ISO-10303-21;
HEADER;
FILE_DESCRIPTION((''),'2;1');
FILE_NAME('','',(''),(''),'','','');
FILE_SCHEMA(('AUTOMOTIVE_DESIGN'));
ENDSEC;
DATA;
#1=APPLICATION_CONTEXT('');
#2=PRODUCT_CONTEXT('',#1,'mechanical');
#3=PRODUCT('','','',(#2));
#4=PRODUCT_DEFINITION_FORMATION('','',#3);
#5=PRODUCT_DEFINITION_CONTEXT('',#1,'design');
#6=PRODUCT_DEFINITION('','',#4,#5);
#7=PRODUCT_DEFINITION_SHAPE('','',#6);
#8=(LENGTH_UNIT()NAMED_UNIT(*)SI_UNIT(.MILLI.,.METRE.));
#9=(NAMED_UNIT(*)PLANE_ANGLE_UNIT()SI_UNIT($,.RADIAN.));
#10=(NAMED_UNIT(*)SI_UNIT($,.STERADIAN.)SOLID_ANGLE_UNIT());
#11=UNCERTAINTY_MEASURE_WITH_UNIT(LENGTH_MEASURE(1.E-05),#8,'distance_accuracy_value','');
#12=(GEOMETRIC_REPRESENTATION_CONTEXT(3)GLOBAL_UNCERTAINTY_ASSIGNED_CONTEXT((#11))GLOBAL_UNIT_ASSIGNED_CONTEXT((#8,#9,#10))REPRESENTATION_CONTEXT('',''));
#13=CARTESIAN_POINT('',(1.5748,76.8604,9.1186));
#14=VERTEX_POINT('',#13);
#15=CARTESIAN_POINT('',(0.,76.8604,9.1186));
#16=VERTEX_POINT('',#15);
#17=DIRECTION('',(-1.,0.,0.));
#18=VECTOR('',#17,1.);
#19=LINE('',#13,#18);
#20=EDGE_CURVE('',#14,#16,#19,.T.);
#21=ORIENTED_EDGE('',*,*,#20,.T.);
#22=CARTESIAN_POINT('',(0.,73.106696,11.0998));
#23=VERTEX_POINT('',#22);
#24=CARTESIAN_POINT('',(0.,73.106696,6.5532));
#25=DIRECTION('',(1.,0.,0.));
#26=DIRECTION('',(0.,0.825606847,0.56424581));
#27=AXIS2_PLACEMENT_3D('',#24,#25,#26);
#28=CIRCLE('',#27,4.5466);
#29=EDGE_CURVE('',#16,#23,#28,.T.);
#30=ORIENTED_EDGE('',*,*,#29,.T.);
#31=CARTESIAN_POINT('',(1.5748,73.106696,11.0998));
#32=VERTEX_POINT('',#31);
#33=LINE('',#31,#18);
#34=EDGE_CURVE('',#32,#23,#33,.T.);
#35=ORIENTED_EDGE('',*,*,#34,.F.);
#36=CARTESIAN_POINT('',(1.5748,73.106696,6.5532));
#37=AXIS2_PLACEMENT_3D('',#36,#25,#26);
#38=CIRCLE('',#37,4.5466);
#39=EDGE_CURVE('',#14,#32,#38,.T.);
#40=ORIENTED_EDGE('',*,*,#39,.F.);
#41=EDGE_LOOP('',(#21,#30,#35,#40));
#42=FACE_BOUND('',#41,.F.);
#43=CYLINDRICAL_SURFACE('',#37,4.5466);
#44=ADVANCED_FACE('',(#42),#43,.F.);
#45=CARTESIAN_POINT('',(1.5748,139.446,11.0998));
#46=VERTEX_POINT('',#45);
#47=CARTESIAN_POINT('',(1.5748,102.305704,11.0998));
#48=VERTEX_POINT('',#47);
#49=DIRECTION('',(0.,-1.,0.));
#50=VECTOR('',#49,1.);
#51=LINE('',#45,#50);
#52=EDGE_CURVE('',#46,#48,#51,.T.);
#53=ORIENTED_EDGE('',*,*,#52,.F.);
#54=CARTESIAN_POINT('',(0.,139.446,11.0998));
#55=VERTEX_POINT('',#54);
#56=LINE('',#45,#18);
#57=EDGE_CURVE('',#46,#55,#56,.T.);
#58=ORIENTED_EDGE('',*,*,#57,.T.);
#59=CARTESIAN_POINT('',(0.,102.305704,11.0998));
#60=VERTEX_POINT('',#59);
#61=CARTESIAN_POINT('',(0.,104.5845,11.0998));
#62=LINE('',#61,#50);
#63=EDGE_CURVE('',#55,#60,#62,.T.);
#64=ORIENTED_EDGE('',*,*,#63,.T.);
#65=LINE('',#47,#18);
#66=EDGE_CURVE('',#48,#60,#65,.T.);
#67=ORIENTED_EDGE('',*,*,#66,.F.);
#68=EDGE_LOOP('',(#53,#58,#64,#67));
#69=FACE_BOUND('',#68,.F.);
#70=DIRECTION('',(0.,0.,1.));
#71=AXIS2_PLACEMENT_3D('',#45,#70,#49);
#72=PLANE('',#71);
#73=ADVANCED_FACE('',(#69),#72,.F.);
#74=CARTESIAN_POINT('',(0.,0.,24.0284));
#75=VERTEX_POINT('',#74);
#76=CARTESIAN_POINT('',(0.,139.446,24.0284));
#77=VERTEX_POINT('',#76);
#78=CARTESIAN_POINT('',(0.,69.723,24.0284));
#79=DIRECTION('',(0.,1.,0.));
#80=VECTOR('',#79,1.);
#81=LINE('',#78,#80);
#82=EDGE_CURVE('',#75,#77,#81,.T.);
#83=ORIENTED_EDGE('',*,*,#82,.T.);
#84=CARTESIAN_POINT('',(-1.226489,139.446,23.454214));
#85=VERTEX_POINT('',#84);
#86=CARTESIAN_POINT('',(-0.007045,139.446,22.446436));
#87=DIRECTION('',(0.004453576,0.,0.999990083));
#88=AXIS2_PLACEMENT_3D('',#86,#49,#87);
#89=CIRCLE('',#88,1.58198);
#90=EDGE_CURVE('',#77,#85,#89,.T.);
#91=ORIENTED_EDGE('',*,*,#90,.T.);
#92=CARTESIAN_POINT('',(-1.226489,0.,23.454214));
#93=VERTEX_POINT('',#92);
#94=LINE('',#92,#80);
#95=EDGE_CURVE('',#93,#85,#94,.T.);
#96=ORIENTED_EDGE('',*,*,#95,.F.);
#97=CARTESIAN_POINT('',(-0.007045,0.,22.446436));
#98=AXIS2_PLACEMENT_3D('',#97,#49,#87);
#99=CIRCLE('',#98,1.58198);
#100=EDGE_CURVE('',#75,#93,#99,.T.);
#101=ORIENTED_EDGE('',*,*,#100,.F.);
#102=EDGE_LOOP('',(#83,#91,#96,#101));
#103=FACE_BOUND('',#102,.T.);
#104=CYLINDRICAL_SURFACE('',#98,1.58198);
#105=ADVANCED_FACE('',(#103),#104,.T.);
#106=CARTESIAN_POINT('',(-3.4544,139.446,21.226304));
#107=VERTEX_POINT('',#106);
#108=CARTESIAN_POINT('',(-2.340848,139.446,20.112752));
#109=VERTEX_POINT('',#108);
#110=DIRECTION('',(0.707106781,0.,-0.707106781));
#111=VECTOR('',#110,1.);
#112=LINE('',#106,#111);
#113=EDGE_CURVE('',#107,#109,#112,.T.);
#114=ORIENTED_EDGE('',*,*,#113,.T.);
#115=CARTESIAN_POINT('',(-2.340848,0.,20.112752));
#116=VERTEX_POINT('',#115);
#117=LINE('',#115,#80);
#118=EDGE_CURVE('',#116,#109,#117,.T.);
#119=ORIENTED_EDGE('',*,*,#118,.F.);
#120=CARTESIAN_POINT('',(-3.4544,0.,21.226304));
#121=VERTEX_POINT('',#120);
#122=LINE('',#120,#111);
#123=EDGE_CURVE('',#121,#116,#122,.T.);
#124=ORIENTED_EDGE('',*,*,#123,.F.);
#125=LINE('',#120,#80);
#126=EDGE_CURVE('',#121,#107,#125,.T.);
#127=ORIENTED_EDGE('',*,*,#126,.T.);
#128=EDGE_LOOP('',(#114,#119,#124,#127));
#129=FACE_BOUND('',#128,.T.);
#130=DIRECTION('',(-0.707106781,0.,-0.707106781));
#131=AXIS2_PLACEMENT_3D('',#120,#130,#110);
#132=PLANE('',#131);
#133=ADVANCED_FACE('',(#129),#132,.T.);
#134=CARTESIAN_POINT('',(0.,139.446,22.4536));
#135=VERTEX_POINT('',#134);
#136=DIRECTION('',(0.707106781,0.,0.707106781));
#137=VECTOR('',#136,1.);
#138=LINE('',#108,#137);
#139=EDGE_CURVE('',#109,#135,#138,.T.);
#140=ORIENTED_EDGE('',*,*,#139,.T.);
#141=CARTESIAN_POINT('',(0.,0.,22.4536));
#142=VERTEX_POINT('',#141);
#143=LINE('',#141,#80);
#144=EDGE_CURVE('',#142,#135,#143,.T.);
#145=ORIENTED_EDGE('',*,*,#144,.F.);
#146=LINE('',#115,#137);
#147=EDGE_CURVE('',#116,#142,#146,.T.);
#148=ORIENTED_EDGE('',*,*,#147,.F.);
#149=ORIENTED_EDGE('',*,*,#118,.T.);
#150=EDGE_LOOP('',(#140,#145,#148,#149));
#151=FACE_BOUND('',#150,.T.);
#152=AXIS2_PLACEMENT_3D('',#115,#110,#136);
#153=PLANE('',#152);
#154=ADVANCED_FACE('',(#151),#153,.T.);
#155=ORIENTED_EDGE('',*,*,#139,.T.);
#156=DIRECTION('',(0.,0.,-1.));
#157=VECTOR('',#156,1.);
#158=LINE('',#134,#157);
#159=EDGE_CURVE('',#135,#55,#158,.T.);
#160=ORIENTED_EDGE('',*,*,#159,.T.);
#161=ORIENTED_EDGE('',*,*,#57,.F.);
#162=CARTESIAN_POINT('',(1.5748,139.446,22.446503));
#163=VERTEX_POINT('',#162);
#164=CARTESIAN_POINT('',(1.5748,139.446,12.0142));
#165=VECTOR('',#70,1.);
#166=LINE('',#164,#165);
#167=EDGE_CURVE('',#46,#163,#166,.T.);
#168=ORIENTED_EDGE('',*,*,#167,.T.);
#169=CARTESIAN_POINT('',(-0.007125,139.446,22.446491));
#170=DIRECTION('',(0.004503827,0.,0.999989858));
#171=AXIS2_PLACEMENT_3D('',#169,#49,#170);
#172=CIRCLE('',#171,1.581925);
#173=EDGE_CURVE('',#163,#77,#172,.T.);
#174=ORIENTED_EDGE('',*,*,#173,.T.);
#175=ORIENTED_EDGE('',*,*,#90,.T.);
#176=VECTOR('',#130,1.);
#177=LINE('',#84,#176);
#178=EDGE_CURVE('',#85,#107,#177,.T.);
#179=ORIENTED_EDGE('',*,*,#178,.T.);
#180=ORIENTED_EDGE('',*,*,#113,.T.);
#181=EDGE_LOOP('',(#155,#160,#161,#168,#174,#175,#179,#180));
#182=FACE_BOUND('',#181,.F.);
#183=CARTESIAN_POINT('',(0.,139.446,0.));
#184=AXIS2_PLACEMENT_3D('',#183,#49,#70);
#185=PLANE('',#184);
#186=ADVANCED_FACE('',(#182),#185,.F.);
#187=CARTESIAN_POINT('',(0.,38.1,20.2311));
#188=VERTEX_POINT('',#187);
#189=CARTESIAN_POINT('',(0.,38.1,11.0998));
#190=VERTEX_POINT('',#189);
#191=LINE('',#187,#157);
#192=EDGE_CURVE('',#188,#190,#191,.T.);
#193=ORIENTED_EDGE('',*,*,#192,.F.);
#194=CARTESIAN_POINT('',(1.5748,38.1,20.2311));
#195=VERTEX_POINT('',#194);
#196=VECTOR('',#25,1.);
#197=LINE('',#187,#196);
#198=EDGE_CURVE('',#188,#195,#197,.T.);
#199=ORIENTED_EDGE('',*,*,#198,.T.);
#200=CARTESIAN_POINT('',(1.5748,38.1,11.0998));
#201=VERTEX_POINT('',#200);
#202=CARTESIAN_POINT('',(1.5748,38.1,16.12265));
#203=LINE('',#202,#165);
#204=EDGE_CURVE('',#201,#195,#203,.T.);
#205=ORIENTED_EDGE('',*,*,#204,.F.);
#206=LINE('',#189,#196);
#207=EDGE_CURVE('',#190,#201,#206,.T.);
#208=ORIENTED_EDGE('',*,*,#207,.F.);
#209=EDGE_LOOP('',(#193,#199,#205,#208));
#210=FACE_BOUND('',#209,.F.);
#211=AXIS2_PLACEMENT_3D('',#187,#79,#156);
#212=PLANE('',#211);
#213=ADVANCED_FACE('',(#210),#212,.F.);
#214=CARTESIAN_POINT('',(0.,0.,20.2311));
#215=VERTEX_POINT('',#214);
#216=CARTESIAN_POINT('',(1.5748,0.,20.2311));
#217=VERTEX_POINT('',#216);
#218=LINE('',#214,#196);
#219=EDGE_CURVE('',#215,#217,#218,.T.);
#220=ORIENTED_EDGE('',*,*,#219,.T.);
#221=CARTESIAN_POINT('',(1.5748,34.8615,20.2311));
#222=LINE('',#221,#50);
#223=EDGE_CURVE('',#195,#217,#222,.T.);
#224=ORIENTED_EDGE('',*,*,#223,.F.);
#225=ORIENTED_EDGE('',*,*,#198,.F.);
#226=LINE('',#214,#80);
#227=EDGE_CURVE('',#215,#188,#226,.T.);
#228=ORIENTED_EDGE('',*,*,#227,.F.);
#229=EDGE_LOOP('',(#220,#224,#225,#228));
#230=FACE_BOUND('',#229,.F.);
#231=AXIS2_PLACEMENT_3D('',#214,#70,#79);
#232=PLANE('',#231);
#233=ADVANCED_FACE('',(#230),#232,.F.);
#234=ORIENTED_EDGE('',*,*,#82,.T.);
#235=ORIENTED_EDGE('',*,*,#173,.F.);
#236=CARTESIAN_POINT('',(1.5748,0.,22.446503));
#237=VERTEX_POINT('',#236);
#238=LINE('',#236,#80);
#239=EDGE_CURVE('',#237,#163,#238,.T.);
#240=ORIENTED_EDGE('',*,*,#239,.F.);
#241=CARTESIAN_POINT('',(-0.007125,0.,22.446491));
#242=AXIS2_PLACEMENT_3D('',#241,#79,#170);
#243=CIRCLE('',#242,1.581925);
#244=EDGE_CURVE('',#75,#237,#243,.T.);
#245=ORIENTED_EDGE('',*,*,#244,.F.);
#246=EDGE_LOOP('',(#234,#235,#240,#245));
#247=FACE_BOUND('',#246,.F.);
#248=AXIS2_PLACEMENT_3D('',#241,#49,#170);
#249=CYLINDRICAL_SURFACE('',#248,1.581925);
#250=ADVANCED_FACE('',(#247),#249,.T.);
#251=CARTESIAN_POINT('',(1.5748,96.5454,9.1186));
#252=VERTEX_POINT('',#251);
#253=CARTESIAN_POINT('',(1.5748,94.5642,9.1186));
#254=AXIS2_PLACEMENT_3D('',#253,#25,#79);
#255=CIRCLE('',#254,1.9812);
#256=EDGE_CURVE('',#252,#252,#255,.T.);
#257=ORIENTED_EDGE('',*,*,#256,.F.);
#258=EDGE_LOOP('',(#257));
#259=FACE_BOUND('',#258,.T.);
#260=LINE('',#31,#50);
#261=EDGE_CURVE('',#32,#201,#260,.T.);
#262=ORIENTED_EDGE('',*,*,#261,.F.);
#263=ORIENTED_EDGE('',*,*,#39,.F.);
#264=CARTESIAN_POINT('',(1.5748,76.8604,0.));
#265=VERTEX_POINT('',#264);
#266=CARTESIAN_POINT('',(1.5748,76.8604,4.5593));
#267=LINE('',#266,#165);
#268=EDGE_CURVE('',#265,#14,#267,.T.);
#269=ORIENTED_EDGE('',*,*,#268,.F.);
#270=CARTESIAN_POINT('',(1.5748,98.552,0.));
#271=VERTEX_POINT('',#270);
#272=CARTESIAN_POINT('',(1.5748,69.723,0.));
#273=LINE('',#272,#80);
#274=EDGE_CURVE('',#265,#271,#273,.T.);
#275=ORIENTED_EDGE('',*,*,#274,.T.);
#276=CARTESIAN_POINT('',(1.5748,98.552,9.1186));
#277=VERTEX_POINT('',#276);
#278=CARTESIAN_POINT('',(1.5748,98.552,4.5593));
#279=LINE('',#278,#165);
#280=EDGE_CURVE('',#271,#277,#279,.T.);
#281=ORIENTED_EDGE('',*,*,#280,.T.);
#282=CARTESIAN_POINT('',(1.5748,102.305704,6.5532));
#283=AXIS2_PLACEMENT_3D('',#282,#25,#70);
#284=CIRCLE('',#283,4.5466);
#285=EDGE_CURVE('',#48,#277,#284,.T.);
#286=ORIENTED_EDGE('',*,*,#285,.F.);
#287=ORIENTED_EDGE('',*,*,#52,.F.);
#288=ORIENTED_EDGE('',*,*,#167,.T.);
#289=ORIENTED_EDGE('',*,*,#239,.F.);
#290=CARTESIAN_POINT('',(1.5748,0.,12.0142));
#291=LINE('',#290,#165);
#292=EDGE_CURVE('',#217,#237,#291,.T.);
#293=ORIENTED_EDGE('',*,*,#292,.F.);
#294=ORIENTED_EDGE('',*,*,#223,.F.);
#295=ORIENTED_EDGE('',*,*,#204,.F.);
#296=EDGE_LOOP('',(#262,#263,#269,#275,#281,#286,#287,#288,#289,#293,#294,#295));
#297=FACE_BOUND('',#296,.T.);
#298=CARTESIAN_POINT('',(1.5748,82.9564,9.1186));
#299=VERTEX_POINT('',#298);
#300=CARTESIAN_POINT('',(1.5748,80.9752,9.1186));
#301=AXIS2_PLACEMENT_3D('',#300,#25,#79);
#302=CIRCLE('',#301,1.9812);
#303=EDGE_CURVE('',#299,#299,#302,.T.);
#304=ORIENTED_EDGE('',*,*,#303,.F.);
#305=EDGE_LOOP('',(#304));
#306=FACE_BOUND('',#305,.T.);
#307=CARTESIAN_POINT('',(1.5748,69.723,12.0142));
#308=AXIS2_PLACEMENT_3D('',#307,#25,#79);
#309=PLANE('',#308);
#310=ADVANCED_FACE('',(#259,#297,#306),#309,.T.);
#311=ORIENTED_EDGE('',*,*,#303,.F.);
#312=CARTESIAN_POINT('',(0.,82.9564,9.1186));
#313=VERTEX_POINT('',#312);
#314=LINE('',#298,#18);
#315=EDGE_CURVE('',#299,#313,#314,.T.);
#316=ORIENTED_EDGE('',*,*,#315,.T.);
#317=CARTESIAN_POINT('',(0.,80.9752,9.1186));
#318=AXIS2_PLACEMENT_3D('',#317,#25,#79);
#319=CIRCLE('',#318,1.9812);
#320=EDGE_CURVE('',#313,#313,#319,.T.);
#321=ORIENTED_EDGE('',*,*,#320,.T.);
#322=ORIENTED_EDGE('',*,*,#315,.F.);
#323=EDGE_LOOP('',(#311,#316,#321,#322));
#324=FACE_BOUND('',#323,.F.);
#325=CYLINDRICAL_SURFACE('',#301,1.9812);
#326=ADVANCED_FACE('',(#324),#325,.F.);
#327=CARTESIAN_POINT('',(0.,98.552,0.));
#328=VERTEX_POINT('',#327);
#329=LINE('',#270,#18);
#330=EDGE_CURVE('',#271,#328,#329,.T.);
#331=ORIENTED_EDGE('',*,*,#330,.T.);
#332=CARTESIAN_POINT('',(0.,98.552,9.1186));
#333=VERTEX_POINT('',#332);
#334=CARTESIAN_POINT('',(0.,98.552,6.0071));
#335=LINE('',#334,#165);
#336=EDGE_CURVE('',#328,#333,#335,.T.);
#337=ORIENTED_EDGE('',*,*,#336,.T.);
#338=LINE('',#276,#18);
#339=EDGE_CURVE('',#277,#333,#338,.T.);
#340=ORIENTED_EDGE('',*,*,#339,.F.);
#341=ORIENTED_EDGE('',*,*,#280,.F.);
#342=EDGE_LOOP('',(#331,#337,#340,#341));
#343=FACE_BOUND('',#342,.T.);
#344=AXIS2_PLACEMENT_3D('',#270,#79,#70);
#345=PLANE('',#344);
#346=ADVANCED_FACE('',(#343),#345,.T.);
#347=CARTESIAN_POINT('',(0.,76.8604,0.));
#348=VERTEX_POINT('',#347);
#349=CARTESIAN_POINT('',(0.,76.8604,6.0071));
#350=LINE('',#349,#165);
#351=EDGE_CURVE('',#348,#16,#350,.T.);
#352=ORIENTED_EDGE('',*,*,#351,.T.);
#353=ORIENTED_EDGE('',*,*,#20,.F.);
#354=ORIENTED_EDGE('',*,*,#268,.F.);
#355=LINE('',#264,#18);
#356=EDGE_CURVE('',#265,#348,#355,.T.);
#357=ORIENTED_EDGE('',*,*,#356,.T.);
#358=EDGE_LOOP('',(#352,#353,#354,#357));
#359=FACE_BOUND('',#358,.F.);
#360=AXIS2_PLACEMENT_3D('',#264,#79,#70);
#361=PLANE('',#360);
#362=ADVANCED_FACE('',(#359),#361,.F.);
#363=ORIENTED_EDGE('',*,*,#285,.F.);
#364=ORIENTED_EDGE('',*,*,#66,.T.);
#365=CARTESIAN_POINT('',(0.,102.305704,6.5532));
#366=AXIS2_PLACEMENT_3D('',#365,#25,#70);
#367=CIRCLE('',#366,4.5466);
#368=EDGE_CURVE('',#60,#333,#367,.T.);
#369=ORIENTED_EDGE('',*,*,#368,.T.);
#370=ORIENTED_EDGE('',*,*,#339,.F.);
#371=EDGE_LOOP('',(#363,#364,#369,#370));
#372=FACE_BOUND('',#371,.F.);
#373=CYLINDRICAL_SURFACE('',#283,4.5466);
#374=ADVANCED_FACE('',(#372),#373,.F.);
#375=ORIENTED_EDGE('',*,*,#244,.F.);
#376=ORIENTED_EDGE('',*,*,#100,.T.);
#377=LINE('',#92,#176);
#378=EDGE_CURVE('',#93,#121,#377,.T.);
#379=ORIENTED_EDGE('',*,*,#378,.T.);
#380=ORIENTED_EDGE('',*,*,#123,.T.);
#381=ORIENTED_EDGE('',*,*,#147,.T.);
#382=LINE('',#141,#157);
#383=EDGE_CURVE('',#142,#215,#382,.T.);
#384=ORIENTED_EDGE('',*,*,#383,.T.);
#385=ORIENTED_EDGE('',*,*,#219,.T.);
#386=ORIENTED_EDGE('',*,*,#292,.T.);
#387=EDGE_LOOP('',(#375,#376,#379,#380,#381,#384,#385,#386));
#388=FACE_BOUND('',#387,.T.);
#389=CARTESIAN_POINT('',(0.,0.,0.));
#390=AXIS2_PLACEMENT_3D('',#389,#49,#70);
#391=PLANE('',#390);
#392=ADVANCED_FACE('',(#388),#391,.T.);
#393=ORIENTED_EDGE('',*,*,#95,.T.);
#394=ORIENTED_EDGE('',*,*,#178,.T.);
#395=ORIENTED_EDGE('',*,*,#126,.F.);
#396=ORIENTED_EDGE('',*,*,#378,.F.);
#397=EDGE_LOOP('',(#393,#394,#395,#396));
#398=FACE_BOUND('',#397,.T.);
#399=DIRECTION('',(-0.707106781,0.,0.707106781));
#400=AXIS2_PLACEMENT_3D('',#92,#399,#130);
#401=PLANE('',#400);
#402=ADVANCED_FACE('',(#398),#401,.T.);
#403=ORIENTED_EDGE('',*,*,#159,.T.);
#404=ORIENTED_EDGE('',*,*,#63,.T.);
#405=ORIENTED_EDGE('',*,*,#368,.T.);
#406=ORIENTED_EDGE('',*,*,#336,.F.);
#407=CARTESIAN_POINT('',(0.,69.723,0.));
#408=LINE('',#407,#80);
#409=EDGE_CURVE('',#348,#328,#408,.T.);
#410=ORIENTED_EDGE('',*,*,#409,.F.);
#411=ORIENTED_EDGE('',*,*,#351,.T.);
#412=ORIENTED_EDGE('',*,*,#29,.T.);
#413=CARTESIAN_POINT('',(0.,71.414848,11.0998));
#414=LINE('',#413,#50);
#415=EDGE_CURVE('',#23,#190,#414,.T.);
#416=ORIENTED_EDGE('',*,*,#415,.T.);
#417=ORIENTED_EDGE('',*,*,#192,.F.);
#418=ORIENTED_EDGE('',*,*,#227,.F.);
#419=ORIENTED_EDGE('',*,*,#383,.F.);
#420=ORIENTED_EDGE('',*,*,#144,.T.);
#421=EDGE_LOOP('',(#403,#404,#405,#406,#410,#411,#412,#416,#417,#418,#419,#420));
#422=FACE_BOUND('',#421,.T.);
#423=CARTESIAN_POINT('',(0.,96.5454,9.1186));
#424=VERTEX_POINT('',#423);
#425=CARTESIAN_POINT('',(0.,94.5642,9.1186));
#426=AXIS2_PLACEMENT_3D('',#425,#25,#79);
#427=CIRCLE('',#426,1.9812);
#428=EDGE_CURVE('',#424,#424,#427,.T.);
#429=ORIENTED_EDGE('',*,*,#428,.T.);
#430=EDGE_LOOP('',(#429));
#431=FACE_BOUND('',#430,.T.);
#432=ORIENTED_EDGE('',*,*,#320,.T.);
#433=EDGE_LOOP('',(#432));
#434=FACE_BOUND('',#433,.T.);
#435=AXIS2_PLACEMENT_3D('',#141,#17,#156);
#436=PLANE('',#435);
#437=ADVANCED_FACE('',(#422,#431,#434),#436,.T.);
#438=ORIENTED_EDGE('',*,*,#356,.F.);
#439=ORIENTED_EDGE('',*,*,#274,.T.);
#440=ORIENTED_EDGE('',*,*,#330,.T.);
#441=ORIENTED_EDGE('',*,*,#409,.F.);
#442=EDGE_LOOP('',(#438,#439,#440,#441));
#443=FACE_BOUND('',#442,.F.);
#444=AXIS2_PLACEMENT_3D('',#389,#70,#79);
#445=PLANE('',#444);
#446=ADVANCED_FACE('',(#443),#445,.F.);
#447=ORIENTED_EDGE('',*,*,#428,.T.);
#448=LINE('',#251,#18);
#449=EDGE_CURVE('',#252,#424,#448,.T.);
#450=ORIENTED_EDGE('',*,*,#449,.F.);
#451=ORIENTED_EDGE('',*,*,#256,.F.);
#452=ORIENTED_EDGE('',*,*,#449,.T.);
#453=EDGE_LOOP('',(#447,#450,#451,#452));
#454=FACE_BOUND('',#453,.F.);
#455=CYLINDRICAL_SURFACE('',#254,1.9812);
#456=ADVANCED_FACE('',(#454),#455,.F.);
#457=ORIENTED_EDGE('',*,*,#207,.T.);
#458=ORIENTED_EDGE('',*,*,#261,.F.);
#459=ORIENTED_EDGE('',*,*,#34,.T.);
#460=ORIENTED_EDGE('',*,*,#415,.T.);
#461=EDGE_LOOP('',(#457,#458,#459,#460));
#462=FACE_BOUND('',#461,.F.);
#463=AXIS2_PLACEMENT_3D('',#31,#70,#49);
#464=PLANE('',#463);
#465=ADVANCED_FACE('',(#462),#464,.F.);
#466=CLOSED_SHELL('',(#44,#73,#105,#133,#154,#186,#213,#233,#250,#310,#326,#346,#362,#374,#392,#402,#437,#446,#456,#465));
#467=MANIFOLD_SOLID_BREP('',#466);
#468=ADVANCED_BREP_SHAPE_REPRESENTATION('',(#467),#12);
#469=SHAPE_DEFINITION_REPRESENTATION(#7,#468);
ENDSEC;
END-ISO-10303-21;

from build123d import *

# Parameters (mm, degrees)
F0_W      = 139.446
F0_H      = 24.0284
F1_DEPTH  = 1.5748
F2_R      = 2.5273
F2_R_2    = 1.9812
F3_DEPTH  = 25.4
F4_W      = 76.8604
F4_H      = 9.1186
F4_W_2    = 40.894
F5_DEPTH  = 25.4
F7_DEPTH  = 25.4
F9_DEPTH  = 139.447
F10_DEPTH = 139.446
F11_R     = 2.5273
F12_DEPTH = 25.4
F14_DEPTH = 1.5748
F15_DEPTH = 25.4


# Not quite as in the source:
# - ends of sketch curves that miss each other by under 0.0002 mm in the source are joined


with BuildPart() as f1:
    # F0 (on Right) → F1 (new body)
    with BuildSketch(Plane.YZ):
        with Locations((69.723, 12.0142)):
            Rectangle(F0_W, F0_H)
    extrude(amount=F1_DEPTH)

    # F2 (on face) → F3 (cut)
    with BuildSketch(Plane.YZ.offset(1.5748)):
        with Locations((7.9502, 14.6812)):
            Circle(F2_R)
        with Locations((80.9752, 9.1186)):
            Circle(F2_R_2)
        with Locations((94.5642, 9.1186)):
            Circle(F2_R_2)
    extrude(amount=-F3_DEPTH, mode=Mode.SUBTRACT)

    # F4 (on face) → F5 (cut)
    with BuildSketch(Plane.YZ.offset(1.5748)):
        with Locations((38.4302, 4.5593)):
            Rectangle(F4_W, F4_H)
        with Locations((118.999, 4.5593)):
            Rectangle(F4_W_2, F4_H)
    extrude(amount=-F5_DEPTH, mode=Mode.SUBTRACT)

    # F6 (on face) → F7 (cut)
    with BuildSketch(Plane.YZ.offset(1.5748)):
        with BuildLine():
            ThreePointArc((102.3057040906, 11.0998), (104.4279345117, 10.5741090514), (106.0594081813, 9.1186))
            Line((106.0594081813, 9.1186), (139.446, 9.1186))
            Line((139.446, 9.1186), (139.446, 11.0998))
            Line((139.446, 11.0998), (102.3057040906, 11.0998))
        make_face()
        with BuildLine():
            Line((98.552, 9.1186), (106.0594081813, 9.1186))
            ThreePointArc((106.0594081813, 9.1186), (104.4279345117, 10.5741090514), (102.3057040906, 11.0998))
            ThreePointArc((102.3057040906, 11.0998), (100.1834736696, 10.5741090514), (98.552, 9.1186))
        make_face()
        with BuildLine():
            ThreePointArc((25.0643040906, 9.1186), (23.4328304559, 10.574109033), (21.3106000788, 11.0998))
            ThreePointArc((21.3106000788, 11.0998), (19.1883696138, 10.5741090698), (17.5568959094, 9.1186))
            Line((17.5568959094, 9.1186), (25.0643040906, 9.1186))
        make_face()
        with BuildLine():
            ThreePointArc((69.3529918187, 9.1186), (70.9844654883, 10.5741090514), (73.1066959094, 11.0998))
            Line((73.1066959094, 11.0998), (21.3106000788, 11.0998))
            ThreePointArc((21.3106000788, 11.0998), (23.4328304559, 10.574109033), (25.0643040906, 9.1186))
            Line((25.0643040906, 9.1186), (69.3529918187, 9.1186))
        make_face()
        with BuildLine():
            ThreePointArc((76.8604, 9.1186), (75.2289263304, 10.5741090514), (73.1066959094, 11.0998))
            ThreePointArc((73.1066959094, 11.0998), (70.9844654883, 10.5741090514), (69.3529918187, 9.1186))
            Line((69.3529918187, 9.1186), (76.8604, 9.1186))
        make_face()
    extrude(amount=-F7_DEPTH, mode=Mode.SUBTRACT)

    # F8 (on face) → F9 (cut, through all)
    with BuildSketch(Plane.XZ):
        with BuildLine():
            Line((1.5748, 24.0284), (0, 24.0284))
            ThreePointArc((0, 24.0284), (1.1139794542, 23.562560882), (1.5748, 22.4465026135))
            Line((1.5748, 22.4465026135), (1.5748, 24.0284))
        make_face()
    extrude(amount=-F9_DEPTH, mode=Mode.SUBTRACT)

    # F8 (on face) → F10 (join)
    with BuildSketch(Plane.XZ):
        with BuildLine():
            Line((0, 24.0284), (0, 22.4536))
            Line((0, 22.4536), (0, 22.4465026135))
            Line((0, 22.4465026135), (1.5748, 22.4465026135))
            ThreePointArc((1.5748, 22.4465026135), (1.1139794542, 23.562560882), (0, 24.0284))
        make_face()
        with BuildLine():
            Line((-1.2264893587, 23.4542141594), (-0.0070973865, 22.4465026135))
            Line((-0.0070973865, 22.4465026135), (0, 22.4536))
            Line((0, 22.4536), (0, 24.0284))
            ThreePointArc((0, 24.0284), (-0.6777928151, 23.8791808689), (-1.2264893587, 23.4542141594))
        make_face()
        Polygon((-3.4544, 21.226303518), (-2.340848241, 20.112751759), (-0.0070973865, 22.4465026135), (-1.2264893587, 23.4542141594), align=None)
    extrude(amount=-F10_DEPTH)

    # F11 (on face) → F12 (cut)
    with BuildSketch(Plane(origin=(0, 0, 0), x_dir=(0, -1, 0), z_dir=(-1, 0, 0))):
        with BuildLine():
            Line((-17.5568959094, 9.1186), (0, 9.1186))
            Line((0, 9.1186), (0, 20.2311))
            Line((0, 20.2311), (-38.1, 20.2311))
            Line((-38.1, 20.2311), (-38.1, 11.0998))
            Line((-38.1, 11.0998), (-21.3106000788, 11.0998))
            ThreePointArc((-21.3106000788, 11.0998), (-19.1883696138, 10.5741090698), (-17.5568959094, 9.1186))
        make_face()
        with Locations((-7.9502, 14.6812)):
            Circle(F11_R, mode=Mode.SUBTRACT)
    extrude(amount=-F12_DEPTH, mode=Mode.SUBTRACT)


with BuildPart() as f14:
    # F13 (on Right) → F14 (new body, through all)
    with BuildSketch(Plane.YZ):
        with BuildLine():
            Line((38.1, 20.2311), (0, 20.2311))
            Line((0, 20.2311), (0, 0))
            Line((0, 0), (16.764, 0))
            Line((16.764, 0), (16.764, 6.5532))
            ThreePointArc((16.764, 6.5532), (18.0956683087, 9.7681316913), (21.3106, 11.0998))
            Line((21.3106, 11.0998), (38.1, 11.0998))
            Line((38.1, 11.0998), (38.1, 20.2311))
        make_face()
    extrude(amount=F14_DEPTH)

    # F2 (on face) → F15 (cut)
    with BuildSketch(Plane.YZ.offset(1.5748)):
        with Locations((7.9502, 14.6812)):
            Circle(F2_R)
    extrude(amount=-F15_DEPTH, mode=Mode.SUBTRACT)


solid = f1.part
